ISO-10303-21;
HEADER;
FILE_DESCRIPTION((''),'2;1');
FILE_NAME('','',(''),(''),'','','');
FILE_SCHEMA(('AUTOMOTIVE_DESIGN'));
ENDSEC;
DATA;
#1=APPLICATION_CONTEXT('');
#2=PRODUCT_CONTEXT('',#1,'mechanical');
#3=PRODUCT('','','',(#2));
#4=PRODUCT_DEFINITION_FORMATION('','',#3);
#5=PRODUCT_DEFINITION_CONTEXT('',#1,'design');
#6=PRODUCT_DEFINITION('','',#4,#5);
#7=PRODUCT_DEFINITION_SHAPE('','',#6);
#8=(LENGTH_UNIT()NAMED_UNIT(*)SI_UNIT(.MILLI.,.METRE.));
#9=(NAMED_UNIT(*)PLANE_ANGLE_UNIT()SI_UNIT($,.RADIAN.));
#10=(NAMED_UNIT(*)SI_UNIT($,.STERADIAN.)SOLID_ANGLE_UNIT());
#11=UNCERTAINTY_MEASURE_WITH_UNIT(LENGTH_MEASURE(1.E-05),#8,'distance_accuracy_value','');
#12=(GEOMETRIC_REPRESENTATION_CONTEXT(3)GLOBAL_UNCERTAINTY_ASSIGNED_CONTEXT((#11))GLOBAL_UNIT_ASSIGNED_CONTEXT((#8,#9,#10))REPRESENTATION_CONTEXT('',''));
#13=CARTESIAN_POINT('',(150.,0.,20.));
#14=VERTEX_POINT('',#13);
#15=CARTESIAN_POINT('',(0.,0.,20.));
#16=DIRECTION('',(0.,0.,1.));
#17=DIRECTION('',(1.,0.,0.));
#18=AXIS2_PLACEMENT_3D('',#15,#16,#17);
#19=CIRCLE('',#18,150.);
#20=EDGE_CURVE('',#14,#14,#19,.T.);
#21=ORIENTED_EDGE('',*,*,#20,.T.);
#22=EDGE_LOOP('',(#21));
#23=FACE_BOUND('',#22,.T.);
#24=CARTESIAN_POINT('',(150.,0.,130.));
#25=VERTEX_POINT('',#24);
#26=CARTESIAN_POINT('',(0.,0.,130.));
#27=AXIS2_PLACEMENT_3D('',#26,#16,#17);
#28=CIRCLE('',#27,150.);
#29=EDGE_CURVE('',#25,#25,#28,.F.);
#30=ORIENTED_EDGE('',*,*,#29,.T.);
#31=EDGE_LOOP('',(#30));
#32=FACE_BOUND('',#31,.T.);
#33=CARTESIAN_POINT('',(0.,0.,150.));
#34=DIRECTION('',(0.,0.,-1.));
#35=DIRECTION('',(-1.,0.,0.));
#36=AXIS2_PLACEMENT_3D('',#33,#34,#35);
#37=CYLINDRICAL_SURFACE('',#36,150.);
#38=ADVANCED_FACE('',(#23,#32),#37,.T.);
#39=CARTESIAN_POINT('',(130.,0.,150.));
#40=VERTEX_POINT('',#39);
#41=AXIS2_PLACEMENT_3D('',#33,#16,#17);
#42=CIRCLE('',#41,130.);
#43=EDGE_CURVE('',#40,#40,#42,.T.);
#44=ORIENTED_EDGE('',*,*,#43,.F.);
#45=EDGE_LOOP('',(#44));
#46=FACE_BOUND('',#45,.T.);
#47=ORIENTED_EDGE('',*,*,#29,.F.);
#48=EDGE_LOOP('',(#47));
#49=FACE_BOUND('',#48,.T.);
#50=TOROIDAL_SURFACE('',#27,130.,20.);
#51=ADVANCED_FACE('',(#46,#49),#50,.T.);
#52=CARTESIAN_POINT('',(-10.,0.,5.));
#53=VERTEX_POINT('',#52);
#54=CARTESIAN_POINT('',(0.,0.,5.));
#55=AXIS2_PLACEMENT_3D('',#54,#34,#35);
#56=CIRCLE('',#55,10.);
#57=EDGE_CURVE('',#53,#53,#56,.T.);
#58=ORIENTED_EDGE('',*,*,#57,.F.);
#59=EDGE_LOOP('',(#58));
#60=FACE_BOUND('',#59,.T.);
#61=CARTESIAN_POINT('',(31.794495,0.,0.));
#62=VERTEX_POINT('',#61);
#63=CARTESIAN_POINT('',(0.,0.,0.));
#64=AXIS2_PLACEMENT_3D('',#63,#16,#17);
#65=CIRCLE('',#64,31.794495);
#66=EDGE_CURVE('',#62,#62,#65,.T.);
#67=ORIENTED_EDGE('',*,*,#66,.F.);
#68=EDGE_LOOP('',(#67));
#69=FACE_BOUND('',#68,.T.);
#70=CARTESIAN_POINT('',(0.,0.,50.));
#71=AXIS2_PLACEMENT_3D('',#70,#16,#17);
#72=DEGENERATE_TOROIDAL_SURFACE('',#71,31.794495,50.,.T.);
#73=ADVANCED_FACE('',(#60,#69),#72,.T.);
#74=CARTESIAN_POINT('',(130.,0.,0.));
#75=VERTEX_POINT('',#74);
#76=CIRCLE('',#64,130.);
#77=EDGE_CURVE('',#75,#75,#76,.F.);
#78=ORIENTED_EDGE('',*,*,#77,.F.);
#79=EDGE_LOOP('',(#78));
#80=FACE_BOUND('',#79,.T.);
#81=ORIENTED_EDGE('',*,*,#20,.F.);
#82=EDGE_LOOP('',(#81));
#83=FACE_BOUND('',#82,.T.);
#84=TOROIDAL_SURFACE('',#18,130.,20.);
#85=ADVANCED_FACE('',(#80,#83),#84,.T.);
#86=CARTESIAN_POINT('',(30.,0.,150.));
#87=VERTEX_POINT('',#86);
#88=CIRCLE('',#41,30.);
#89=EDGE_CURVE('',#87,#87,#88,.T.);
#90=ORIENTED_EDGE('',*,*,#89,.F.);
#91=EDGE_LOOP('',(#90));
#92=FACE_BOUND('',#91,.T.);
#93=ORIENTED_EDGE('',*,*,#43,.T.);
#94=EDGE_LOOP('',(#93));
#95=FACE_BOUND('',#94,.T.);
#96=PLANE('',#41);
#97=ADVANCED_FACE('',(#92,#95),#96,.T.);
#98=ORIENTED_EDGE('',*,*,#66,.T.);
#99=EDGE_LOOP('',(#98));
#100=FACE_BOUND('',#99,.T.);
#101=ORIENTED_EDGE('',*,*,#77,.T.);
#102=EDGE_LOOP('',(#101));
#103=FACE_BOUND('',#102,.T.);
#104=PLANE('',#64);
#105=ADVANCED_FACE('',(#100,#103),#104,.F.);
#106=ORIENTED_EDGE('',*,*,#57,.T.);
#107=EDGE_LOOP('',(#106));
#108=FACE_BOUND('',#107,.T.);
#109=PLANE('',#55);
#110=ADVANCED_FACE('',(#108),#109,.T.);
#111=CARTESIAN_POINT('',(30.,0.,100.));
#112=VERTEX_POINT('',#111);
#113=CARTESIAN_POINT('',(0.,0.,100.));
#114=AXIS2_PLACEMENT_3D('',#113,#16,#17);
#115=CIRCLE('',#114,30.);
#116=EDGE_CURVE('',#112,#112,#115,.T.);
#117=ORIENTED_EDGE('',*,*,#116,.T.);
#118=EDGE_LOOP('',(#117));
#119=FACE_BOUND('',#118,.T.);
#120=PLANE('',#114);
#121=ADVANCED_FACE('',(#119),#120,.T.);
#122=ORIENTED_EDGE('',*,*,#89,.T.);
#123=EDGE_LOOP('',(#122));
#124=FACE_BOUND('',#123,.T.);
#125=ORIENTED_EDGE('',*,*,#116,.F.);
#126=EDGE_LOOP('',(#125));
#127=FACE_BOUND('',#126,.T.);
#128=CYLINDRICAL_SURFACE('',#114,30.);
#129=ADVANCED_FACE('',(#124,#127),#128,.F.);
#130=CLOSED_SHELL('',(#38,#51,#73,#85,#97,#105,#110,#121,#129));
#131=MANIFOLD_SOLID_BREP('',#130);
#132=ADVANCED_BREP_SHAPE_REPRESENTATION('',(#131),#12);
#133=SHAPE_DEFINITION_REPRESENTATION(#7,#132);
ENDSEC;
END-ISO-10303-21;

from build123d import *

# Parameters (mm, degrees)
SKETCH1_R           = 150
BOSS_EXTRUDE1_DEPTH = 150
SKETCH2_R           = 30
CUT_EXTRUDE1_DEPTH  = 50
FILLET1_R           = 20
SKETCH3_R           = 10
CUT_EXTRUDE2_DEPTH  = 5
FILLET4_R           = 50


with BuildPart() as part:
    # Sketch1 → Boss-Extrude1 (new body)
    with BuildSketch(Plane.XY):
        Circle(SKETCH1_R)
    extrude(amount=BOSS_EXTRUDE1_DEPTH)

    # Sketch2 → Cut-Extrude1 (cut)
    with BuildSketch(Plane.XY.offset(150)):
        Circle(SKETCH2_R)
    extrude(amount=-CUT_EXTRUDE1_DEPTH, mode=Mode.SUBTRACT)

    # Fillet1
    fillet1_edges = [part.edges().sort_by_distance(p)[0] for p in [
        (-150, 0, 0),
        (-150, 0, 150),
    ]]
    fillet(fillet1_edges, radius=FILLET1_R)

    # Sketch3 → Cut-Extrude2 (cut)
    with BuildSketch(Plane(origin=(0, 0, 0), x_dir=(-1, 0, 0), z_dir=(0, 0, -1))):
        Circle(SKETCH3_R)
    extrude(amount=-CUT_EXTRUDE2_DEPTH, mode=Mode.SUBTRACT)

    # Fillet4
    # the kernel refuses this fillet: 50 mm, written as the material it takes off along each edge
    with BuildSketch(Plane(origin=(0, 0, 0), x_dir=(-1, 0, 0), z_dir=(0, -1, 0))) as fillet4_piece_1:
        with BuildLine():
            CenterArc((31.794494718, -50), FILLET4_R, 90, 25.841932763)
            Line((10, -5), (9.564110106, -4.1))
            ThreePointArc((9.564110106, -4.1), (9, -2.5), (9, 0))
            Line((9, 0), (10, 1))
            Line((10, 1), (31.794494718, 1))
            Line((31.794494718, 1), (31.794494718, 0))
        make_face()
    revolve(axis=Axis((0, 0, 0), (0, 0, -1)), mode=Mode.SUBTRACT)


solid = part.part
